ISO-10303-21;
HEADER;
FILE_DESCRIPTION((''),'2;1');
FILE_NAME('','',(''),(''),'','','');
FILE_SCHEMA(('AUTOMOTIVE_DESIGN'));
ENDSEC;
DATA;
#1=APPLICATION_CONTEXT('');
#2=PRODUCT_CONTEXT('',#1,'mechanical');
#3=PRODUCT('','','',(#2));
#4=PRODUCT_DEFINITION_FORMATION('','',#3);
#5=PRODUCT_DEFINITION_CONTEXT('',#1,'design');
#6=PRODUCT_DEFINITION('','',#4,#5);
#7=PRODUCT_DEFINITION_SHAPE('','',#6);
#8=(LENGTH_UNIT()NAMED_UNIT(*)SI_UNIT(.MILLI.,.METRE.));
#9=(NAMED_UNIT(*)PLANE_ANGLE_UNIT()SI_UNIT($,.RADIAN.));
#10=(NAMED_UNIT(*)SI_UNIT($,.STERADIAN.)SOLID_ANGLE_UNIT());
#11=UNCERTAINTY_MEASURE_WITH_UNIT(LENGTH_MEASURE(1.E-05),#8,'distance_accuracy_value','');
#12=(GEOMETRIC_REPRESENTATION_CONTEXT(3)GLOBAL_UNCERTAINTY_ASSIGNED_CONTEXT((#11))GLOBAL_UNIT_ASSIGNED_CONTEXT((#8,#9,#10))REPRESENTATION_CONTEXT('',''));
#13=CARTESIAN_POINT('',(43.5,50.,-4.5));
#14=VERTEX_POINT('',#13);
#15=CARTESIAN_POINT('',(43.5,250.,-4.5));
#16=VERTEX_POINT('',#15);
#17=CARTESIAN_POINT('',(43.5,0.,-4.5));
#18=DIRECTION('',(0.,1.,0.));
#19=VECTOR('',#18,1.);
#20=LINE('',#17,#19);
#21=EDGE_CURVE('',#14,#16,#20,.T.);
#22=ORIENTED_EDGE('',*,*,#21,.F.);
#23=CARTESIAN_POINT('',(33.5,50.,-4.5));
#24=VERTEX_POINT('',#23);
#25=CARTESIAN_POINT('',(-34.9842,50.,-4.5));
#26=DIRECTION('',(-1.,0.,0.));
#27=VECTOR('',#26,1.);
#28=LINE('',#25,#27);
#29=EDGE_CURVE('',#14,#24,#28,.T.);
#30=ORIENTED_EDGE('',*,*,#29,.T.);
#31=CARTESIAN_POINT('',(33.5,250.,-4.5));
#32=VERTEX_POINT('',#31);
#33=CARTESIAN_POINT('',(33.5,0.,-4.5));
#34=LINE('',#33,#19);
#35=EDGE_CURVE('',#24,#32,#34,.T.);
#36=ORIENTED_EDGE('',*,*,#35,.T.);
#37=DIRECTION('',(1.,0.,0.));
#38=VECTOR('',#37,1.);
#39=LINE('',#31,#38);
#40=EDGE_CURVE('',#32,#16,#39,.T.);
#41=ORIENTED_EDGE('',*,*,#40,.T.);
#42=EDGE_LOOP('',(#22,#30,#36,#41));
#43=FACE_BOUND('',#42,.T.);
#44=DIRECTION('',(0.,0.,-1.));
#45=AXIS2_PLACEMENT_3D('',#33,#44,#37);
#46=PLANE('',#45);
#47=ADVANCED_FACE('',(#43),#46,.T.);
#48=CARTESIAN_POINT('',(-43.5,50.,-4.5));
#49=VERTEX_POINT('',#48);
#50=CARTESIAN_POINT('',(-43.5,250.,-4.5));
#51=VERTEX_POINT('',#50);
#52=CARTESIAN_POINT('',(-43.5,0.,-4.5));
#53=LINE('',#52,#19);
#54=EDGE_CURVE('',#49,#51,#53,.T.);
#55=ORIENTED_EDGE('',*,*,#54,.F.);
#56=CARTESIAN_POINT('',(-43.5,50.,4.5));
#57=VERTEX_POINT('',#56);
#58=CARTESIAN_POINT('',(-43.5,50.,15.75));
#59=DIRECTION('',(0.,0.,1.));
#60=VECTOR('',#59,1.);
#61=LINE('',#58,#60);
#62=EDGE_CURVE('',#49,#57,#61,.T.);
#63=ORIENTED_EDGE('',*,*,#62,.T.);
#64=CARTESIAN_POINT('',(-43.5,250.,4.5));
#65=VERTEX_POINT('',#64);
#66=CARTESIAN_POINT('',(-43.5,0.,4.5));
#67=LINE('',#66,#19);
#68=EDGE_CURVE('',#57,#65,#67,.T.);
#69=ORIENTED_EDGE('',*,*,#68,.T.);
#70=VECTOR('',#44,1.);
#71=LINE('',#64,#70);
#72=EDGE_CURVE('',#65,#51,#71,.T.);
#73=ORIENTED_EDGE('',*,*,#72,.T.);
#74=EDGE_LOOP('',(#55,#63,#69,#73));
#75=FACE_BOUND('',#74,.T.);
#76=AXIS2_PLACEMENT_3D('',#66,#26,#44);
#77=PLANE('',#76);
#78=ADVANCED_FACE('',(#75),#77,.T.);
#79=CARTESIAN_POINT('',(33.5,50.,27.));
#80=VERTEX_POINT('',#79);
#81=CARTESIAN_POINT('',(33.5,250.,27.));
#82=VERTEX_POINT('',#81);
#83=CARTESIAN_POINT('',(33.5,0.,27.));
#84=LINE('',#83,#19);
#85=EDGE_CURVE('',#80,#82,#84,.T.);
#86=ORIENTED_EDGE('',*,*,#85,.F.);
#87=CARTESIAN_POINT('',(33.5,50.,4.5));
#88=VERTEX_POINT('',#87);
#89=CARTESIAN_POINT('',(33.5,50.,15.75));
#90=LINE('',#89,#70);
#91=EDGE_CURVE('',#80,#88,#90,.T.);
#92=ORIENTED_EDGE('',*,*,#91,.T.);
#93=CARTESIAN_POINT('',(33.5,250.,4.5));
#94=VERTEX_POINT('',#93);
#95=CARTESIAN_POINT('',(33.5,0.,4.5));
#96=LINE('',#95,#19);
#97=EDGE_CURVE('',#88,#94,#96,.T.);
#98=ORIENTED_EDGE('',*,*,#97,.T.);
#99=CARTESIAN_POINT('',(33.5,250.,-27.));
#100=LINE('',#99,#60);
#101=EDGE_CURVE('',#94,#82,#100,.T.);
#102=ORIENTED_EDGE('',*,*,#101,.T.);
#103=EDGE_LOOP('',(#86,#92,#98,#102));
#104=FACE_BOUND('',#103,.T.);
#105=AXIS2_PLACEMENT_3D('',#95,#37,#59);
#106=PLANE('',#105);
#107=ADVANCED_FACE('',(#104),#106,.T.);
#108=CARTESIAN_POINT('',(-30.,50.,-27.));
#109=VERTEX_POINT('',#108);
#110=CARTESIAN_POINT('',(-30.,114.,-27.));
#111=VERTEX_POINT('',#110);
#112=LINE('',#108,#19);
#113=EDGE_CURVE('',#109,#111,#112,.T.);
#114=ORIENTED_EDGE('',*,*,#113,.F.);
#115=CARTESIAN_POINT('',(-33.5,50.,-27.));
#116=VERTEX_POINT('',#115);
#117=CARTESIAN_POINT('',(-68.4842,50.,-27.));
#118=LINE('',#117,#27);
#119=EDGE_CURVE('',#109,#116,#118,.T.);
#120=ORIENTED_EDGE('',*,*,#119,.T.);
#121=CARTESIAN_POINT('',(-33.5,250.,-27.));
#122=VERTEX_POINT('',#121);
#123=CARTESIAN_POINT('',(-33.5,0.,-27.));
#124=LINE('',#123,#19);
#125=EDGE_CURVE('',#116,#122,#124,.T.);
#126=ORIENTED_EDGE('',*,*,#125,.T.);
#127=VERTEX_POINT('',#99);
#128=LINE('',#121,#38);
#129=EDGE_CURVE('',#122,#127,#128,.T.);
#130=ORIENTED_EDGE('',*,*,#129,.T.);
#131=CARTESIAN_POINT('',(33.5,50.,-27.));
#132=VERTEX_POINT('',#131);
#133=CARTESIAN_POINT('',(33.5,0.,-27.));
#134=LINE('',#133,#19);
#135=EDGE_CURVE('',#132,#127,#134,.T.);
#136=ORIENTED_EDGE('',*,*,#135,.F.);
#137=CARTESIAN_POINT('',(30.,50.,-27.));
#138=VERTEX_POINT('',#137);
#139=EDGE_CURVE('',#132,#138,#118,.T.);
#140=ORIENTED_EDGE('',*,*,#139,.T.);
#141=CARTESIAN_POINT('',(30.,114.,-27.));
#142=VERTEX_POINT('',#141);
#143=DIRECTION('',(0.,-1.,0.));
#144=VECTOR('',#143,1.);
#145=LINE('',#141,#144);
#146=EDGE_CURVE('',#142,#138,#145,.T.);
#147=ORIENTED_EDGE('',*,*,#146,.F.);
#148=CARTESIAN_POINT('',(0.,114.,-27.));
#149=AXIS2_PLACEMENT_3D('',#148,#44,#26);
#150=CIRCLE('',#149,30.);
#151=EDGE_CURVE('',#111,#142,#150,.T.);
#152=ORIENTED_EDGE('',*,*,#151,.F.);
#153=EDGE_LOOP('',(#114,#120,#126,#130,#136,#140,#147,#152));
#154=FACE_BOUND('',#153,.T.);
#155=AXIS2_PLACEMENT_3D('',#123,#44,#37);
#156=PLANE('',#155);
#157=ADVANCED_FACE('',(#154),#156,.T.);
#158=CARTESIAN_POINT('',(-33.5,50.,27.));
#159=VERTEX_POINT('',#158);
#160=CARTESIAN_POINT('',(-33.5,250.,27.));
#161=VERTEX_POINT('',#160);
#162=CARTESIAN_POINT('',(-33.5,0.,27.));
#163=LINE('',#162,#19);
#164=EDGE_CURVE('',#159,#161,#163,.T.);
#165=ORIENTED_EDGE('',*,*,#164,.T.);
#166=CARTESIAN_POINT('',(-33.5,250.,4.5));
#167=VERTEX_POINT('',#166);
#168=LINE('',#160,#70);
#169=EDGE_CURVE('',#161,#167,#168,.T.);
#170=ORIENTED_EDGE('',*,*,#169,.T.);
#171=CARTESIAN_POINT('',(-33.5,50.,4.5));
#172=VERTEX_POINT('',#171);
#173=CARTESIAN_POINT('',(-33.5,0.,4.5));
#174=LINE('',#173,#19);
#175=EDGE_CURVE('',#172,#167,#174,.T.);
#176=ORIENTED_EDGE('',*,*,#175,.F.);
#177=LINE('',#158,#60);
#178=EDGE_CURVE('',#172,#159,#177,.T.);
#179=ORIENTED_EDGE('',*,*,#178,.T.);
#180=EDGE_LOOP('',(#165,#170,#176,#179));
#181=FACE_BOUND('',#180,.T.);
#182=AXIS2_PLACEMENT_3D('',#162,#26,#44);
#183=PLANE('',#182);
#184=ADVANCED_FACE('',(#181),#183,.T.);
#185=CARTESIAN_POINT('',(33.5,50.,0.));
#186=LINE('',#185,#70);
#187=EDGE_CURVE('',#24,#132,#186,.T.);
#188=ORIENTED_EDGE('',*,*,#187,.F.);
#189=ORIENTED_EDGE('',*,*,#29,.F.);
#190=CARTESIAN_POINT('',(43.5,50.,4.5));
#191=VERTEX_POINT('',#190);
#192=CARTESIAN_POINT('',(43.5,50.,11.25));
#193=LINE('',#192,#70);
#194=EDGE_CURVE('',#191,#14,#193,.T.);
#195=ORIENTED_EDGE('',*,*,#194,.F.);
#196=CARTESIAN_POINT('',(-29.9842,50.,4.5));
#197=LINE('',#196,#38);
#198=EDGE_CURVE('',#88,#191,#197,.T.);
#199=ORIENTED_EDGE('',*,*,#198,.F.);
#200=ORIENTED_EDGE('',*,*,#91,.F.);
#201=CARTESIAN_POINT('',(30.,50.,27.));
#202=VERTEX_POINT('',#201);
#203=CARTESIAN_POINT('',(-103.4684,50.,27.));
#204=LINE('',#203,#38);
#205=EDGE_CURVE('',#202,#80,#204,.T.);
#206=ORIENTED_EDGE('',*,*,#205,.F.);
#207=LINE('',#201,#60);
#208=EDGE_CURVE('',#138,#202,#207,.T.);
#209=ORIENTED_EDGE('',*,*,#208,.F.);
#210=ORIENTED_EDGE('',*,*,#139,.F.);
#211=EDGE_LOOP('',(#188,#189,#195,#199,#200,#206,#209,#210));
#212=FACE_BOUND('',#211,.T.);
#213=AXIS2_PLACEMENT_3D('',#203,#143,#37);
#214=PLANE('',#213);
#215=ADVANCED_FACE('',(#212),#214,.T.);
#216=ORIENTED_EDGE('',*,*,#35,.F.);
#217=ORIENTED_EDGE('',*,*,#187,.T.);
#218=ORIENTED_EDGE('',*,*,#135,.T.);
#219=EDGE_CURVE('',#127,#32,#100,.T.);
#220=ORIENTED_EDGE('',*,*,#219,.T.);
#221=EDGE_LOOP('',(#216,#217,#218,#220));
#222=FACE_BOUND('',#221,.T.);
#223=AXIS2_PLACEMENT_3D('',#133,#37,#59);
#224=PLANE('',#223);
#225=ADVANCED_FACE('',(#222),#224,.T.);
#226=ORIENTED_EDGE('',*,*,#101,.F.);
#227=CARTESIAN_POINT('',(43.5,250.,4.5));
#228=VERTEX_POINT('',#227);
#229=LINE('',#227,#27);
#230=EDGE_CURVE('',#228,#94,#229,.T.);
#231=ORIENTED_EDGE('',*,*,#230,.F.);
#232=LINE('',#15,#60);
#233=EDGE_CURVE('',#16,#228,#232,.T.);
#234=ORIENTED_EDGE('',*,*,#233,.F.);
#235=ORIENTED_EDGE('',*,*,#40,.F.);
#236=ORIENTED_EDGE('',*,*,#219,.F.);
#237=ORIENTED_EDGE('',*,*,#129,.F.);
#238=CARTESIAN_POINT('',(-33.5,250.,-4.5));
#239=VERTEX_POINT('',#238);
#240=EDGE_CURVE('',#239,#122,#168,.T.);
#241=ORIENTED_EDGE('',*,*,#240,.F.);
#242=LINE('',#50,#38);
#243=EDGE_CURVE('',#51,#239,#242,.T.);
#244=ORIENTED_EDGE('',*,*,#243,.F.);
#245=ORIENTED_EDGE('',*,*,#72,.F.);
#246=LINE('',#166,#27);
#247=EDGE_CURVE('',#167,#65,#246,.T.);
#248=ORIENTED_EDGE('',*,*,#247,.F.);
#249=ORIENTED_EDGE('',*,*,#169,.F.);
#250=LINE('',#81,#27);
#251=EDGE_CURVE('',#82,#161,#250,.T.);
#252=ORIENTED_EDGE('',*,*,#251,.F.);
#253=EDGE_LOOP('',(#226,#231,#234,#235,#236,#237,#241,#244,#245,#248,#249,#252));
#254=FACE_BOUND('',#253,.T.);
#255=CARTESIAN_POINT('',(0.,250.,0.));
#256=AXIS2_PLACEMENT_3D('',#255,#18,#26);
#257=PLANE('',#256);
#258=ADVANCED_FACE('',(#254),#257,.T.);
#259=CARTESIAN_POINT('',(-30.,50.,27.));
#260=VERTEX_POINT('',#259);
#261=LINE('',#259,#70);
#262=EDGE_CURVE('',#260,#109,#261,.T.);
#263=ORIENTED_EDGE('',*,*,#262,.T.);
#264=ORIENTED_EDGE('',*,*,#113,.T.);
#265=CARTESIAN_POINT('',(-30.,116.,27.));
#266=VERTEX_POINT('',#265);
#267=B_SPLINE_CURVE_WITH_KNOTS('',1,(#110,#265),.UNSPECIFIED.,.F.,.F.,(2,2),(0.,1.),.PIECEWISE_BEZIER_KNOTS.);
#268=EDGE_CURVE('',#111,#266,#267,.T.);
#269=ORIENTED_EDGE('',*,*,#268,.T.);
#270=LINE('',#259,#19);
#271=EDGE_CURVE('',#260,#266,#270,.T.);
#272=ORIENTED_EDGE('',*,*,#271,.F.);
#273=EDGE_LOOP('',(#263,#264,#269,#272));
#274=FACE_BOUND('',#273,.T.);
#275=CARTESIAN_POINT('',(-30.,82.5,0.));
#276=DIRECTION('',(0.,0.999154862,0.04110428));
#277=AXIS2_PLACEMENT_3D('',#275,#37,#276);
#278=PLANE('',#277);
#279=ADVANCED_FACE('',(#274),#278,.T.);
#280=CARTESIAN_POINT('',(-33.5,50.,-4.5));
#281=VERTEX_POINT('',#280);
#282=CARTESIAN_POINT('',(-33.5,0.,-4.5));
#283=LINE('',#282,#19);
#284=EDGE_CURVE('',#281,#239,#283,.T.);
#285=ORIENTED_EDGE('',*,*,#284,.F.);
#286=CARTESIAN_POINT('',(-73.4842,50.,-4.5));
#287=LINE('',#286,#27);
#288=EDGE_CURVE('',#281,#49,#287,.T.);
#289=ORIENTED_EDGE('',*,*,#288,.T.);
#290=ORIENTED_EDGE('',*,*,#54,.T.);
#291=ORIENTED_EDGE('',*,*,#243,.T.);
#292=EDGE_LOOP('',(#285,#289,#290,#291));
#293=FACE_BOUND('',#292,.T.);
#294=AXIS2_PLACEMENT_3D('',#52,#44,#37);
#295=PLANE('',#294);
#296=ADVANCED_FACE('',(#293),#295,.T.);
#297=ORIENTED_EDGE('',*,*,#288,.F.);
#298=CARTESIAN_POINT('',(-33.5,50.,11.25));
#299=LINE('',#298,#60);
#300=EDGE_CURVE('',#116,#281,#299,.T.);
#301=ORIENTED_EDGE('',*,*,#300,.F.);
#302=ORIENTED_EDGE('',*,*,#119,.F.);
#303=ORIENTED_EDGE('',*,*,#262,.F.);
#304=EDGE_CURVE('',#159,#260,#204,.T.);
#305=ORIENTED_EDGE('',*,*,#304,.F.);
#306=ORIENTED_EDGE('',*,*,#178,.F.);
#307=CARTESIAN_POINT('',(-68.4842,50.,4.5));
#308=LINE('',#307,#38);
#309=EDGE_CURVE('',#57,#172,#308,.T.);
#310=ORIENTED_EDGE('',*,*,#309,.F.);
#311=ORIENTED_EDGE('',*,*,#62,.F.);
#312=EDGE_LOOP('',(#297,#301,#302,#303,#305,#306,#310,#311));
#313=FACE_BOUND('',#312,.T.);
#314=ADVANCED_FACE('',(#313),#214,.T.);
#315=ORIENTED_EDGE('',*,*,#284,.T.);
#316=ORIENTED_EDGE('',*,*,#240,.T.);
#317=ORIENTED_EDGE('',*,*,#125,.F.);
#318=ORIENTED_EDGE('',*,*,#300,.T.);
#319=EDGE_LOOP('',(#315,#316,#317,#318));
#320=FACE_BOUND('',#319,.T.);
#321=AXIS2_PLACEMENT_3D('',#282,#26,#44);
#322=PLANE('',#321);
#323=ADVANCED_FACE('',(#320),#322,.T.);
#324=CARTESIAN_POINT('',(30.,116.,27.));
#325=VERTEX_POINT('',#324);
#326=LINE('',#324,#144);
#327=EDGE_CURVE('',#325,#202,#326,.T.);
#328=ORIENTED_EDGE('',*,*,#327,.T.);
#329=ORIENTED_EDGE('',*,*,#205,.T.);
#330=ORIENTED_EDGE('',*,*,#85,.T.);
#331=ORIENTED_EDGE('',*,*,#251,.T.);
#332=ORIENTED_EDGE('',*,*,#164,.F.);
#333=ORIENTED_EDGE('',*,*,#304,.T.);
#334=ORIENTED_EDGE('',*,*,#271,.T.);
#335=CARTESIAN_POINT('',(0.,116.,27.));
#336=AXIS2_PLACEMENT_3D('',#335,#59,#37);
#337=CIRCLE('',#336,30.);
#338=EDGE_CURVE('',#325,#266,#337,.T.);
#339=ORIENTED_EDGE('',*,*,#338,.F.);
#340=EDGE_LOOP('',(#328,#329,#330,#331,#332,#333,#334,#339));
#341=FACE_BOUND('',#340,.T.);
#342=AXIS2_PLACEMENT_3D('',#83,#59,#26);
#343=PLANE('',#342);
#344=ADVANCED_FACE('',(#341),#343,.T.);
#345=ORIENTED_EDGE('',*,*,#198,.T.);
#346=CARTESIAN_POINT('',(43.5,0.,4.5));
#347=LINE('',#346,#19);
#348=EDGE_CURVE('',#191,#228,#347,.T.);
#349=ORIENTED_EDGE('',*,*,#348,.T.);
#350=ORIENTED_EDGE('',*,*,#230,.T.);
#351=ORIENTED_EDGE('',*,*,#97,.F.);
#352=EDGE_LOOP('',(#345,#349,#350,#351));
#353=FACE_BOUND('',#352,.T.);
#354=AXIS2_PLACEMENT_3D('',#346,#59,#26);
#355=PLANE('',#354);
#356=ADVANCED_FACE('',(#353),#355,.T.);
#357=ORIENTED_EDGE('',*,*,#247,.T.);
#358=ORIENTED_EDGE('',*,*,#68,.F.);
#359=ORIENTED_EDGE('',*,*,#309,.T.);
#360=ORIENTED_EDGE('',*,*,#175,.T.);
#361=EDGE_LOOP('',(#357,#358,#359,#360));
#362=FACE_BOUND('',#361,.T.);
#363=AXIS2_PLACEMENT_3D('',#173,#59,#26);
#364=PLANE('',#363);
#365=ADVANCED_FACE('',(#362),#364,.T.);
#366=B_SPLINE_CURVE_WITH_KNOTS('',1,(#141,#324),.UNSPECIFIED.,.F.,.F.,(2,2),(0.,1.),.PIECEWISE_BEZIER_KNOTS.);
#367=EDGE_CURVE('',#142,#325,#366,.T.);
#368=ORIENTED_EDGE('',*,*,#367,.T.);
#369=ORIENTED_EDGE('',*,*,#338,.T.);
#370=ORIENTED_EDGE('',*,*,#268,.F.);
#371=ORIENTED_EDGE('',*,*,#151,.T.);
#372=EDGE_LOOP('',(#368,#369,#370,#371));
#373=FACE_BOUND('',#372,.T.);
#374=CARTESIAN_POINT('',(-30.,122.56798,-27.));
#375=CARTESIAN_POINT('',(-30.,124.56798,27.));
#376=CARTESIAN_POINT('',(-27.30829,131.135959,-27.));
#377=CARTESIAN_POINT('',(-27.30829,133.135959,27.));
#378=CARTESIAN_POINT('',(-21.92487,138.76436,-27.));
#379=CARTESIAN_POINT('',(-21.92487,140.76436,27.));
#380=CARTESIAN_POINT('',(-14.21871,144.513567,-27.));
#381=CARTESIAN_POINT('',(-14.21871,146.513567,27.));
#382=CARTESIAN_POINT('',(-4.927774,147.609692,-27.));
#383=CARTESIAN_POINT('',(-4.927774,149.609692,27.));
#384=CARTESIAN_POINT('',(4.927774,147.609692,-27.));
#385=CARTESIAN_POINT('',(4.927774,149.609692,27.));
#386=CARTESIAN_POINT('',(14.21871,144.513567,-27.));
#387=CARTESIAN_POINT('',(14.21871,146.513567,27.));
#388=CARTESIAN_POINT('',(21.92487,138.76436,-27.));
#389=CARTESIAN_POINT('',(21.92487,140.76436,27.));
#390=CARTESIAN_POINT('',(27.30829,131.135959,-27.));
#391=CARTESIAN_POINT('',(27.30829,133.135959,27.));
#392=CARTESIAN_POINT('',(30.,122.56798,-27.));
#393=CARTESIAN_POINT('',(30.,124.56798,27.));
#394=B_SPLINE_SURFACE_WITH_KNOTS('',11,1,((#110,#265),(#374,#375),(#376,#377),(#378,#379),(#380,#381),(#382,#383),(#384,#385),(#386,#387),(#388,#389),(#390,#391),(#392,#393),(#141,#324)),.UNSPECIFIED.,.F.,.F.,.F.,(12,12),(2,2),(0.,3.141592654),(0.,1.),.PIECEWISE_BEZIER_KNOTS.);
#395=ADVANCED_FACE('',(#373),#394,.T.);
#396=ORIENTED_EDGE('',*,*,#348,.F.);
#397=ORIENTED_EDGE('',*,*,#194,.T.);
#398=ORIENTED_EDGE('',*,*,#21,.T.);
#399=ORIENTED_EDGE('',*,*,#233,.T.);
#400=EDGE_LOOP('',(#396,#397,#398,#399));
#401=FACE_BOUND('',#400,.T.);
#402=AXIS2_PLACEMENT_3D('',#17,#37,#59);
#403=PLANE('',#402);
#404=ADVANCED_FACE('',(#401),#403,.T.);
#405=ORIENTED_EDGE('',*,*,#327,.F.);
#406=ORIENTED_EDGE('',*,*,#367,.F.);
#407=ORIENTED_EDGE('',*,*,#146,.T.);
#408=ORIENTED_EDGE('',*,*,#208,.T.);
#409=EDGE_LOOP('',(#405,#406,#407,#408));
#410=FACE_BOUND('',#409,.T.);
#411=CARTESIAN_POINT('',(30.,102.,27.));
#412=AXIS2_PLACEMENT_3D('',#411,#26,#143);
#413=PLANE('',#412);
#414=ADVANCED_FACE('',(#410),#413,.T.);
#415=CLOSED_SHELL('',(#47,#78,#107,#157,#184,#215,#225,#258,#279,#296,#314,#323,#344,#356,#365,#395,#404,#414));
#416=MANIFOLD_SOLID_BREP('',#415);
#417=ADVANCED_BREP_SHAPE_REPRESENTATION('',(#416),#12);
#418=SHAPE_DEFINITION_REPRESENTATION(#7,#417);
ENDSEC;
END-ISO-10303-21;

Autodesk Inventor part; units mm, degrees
ref_plane "YZ Plane" through (0, 0, 0) normal (1, 0, 0) x (0, 1, 0)
ref_plane "XZ Plane" through (0, 0, 0) normal (0, 1, 0) x (-1, 0, 0)
ref_plane "XY Plane" through (0, 0, 0) normal (0, 0, 1) x (1, 0, 0)
sketch "草圖1" plane through (0, 0, 0) normal (0, 1, 0) x (-1, 0, 0)
  line L0 (-33.5, 27) -> (33.5, 27)
  line L1 (33.5, 27) -> (33.5, -27)
  line L2 (33.5, -27) -> (-33.5, -27)
  line L3 (-33.5, -27) -> (-33.5, 27)
  line L4 (-33.5, 27) -> (33.5, -27) construction
  line L5 (33.5, 27) -> (-33.5, -27) construction
  line L6 (43.5, -4.5) -> (33.5, -4.5)
  line L7 (33.5, -4.5) -> (33.5, 4.5)
  line L8 (33.5, 4.5) -> (43.5, 4.5)
  line L9 (43.5, 4.5) -> (43.5, -4.5)
  line L10 (-33.5, -4.5) -> (-43.5, -4.5)
  line L11 (-43.5, -4.5) -> (-43.5, 4.5)
  line L12 (-43.5, 4.5) -> (-33.5, 4.5)
  line L13 (-33.5, 4.5) -> (-33.5, -4.5)
  point P0 (0, 0)
  point P1 (33.5, 0)
  point P2 (-33.5, 0)
  point P3 (-33.5, 4.5)
  point P4 (-33.5, -4.5)
  dimension "d0" = 67
  dimension "d1" = 54
  dimension "d2" = 9
  dimension "d3" = 10
extrude "擠出1" add sketch "草圖1" along normal blind 250
sketch "草圖2" plane through (-33.5, 0, 27) normal (0, 0, 1) x (1, 0, 0)
  circle A0 centre (33.5, 102) radius 30
  line L0 (0, 0) -> (67, 0) projected
  line L1 (3.5, 102) -> (63.5, 102)
  line L2 (63.5, 102) -> (63.5, -30.9469)
  line L3 (63.5, -30.9469) -> (3.5, -30.9469)
  line L4 (3.5, -30.9469) -> (3.5, 102)
  point P0 (33.5, 0)
  point P1 (33.5, 0)
  point P2 (63.5, 102)
  dimension "d6" = 102
  dimension "d7" = 60
extrude "擠出2" cut sketch "草圖2" against normal through all
sketch "草圖3" plane through (-33.5, 250, 27) normal (0, 0, 1) x (1, 0, 0)
  line L0 (-69.9684, -200) -> (136.9684, -200)
  line L1 (136.9684, -200) -> (136.9684, -250)
  line L2 (136.9684, -250) -> (-69.9684, -250)
  line L3 (-69.9684, -250) -> (-69.9684, -200)
  point P0 (33.5, -250)
  point P1 (33.5, -250)
  dimension "d10" = 50
extrude "擠出3" cut sketch "草圖3" against normal through all
sketch "草圖4" plane through (33.5, 250, -27) normal (0, 0, -1) x (-1, 0, 0)
  arc A0 (63.5, -148) -> (3.5, -148) centre (33.5, -148) ccw construction
  circle A1 centre (33.5, -136) radius 30
  line L0 (63.5, -200) -> (3.5, -200)
  line L1 (3.5, -200) -> (3.5, -136)
  line L2 (3.5, -136) -> (63.5, -136)
  line L3 (63.5, -136) -> (63.5, -200)
  point P0 (33.5, -250)
  point P1 (63.5, -200)
  dimension "d13" = 12
  dimension "d14" = 60
sketch "草圖5" plane through (-33.5, 250, 27) normal (0, 0, 1) x (1, 0, 0)
  circle A0 centre (33.5, -134) radius 30
  arc A1 (63.5, -148) -> (3.5, -148) centre (33.5, -148) ccw construction
  line L0 (63.5, -200) -> (3.5, -200)
  line L1 (3.5, -200) -> (3.5, -134)
  line L2 (3.5, -134) -> (63.5, -134)
  line L3 (63.5, -134) -> (63.5, -200)
  point P0 (33.5, -250)
  dimension "d15" = 14
  dimension "d16" = 60
loft "斷面混成1" cut profiles "草圖4", "草圖5"
properties part number "Slider-4"
